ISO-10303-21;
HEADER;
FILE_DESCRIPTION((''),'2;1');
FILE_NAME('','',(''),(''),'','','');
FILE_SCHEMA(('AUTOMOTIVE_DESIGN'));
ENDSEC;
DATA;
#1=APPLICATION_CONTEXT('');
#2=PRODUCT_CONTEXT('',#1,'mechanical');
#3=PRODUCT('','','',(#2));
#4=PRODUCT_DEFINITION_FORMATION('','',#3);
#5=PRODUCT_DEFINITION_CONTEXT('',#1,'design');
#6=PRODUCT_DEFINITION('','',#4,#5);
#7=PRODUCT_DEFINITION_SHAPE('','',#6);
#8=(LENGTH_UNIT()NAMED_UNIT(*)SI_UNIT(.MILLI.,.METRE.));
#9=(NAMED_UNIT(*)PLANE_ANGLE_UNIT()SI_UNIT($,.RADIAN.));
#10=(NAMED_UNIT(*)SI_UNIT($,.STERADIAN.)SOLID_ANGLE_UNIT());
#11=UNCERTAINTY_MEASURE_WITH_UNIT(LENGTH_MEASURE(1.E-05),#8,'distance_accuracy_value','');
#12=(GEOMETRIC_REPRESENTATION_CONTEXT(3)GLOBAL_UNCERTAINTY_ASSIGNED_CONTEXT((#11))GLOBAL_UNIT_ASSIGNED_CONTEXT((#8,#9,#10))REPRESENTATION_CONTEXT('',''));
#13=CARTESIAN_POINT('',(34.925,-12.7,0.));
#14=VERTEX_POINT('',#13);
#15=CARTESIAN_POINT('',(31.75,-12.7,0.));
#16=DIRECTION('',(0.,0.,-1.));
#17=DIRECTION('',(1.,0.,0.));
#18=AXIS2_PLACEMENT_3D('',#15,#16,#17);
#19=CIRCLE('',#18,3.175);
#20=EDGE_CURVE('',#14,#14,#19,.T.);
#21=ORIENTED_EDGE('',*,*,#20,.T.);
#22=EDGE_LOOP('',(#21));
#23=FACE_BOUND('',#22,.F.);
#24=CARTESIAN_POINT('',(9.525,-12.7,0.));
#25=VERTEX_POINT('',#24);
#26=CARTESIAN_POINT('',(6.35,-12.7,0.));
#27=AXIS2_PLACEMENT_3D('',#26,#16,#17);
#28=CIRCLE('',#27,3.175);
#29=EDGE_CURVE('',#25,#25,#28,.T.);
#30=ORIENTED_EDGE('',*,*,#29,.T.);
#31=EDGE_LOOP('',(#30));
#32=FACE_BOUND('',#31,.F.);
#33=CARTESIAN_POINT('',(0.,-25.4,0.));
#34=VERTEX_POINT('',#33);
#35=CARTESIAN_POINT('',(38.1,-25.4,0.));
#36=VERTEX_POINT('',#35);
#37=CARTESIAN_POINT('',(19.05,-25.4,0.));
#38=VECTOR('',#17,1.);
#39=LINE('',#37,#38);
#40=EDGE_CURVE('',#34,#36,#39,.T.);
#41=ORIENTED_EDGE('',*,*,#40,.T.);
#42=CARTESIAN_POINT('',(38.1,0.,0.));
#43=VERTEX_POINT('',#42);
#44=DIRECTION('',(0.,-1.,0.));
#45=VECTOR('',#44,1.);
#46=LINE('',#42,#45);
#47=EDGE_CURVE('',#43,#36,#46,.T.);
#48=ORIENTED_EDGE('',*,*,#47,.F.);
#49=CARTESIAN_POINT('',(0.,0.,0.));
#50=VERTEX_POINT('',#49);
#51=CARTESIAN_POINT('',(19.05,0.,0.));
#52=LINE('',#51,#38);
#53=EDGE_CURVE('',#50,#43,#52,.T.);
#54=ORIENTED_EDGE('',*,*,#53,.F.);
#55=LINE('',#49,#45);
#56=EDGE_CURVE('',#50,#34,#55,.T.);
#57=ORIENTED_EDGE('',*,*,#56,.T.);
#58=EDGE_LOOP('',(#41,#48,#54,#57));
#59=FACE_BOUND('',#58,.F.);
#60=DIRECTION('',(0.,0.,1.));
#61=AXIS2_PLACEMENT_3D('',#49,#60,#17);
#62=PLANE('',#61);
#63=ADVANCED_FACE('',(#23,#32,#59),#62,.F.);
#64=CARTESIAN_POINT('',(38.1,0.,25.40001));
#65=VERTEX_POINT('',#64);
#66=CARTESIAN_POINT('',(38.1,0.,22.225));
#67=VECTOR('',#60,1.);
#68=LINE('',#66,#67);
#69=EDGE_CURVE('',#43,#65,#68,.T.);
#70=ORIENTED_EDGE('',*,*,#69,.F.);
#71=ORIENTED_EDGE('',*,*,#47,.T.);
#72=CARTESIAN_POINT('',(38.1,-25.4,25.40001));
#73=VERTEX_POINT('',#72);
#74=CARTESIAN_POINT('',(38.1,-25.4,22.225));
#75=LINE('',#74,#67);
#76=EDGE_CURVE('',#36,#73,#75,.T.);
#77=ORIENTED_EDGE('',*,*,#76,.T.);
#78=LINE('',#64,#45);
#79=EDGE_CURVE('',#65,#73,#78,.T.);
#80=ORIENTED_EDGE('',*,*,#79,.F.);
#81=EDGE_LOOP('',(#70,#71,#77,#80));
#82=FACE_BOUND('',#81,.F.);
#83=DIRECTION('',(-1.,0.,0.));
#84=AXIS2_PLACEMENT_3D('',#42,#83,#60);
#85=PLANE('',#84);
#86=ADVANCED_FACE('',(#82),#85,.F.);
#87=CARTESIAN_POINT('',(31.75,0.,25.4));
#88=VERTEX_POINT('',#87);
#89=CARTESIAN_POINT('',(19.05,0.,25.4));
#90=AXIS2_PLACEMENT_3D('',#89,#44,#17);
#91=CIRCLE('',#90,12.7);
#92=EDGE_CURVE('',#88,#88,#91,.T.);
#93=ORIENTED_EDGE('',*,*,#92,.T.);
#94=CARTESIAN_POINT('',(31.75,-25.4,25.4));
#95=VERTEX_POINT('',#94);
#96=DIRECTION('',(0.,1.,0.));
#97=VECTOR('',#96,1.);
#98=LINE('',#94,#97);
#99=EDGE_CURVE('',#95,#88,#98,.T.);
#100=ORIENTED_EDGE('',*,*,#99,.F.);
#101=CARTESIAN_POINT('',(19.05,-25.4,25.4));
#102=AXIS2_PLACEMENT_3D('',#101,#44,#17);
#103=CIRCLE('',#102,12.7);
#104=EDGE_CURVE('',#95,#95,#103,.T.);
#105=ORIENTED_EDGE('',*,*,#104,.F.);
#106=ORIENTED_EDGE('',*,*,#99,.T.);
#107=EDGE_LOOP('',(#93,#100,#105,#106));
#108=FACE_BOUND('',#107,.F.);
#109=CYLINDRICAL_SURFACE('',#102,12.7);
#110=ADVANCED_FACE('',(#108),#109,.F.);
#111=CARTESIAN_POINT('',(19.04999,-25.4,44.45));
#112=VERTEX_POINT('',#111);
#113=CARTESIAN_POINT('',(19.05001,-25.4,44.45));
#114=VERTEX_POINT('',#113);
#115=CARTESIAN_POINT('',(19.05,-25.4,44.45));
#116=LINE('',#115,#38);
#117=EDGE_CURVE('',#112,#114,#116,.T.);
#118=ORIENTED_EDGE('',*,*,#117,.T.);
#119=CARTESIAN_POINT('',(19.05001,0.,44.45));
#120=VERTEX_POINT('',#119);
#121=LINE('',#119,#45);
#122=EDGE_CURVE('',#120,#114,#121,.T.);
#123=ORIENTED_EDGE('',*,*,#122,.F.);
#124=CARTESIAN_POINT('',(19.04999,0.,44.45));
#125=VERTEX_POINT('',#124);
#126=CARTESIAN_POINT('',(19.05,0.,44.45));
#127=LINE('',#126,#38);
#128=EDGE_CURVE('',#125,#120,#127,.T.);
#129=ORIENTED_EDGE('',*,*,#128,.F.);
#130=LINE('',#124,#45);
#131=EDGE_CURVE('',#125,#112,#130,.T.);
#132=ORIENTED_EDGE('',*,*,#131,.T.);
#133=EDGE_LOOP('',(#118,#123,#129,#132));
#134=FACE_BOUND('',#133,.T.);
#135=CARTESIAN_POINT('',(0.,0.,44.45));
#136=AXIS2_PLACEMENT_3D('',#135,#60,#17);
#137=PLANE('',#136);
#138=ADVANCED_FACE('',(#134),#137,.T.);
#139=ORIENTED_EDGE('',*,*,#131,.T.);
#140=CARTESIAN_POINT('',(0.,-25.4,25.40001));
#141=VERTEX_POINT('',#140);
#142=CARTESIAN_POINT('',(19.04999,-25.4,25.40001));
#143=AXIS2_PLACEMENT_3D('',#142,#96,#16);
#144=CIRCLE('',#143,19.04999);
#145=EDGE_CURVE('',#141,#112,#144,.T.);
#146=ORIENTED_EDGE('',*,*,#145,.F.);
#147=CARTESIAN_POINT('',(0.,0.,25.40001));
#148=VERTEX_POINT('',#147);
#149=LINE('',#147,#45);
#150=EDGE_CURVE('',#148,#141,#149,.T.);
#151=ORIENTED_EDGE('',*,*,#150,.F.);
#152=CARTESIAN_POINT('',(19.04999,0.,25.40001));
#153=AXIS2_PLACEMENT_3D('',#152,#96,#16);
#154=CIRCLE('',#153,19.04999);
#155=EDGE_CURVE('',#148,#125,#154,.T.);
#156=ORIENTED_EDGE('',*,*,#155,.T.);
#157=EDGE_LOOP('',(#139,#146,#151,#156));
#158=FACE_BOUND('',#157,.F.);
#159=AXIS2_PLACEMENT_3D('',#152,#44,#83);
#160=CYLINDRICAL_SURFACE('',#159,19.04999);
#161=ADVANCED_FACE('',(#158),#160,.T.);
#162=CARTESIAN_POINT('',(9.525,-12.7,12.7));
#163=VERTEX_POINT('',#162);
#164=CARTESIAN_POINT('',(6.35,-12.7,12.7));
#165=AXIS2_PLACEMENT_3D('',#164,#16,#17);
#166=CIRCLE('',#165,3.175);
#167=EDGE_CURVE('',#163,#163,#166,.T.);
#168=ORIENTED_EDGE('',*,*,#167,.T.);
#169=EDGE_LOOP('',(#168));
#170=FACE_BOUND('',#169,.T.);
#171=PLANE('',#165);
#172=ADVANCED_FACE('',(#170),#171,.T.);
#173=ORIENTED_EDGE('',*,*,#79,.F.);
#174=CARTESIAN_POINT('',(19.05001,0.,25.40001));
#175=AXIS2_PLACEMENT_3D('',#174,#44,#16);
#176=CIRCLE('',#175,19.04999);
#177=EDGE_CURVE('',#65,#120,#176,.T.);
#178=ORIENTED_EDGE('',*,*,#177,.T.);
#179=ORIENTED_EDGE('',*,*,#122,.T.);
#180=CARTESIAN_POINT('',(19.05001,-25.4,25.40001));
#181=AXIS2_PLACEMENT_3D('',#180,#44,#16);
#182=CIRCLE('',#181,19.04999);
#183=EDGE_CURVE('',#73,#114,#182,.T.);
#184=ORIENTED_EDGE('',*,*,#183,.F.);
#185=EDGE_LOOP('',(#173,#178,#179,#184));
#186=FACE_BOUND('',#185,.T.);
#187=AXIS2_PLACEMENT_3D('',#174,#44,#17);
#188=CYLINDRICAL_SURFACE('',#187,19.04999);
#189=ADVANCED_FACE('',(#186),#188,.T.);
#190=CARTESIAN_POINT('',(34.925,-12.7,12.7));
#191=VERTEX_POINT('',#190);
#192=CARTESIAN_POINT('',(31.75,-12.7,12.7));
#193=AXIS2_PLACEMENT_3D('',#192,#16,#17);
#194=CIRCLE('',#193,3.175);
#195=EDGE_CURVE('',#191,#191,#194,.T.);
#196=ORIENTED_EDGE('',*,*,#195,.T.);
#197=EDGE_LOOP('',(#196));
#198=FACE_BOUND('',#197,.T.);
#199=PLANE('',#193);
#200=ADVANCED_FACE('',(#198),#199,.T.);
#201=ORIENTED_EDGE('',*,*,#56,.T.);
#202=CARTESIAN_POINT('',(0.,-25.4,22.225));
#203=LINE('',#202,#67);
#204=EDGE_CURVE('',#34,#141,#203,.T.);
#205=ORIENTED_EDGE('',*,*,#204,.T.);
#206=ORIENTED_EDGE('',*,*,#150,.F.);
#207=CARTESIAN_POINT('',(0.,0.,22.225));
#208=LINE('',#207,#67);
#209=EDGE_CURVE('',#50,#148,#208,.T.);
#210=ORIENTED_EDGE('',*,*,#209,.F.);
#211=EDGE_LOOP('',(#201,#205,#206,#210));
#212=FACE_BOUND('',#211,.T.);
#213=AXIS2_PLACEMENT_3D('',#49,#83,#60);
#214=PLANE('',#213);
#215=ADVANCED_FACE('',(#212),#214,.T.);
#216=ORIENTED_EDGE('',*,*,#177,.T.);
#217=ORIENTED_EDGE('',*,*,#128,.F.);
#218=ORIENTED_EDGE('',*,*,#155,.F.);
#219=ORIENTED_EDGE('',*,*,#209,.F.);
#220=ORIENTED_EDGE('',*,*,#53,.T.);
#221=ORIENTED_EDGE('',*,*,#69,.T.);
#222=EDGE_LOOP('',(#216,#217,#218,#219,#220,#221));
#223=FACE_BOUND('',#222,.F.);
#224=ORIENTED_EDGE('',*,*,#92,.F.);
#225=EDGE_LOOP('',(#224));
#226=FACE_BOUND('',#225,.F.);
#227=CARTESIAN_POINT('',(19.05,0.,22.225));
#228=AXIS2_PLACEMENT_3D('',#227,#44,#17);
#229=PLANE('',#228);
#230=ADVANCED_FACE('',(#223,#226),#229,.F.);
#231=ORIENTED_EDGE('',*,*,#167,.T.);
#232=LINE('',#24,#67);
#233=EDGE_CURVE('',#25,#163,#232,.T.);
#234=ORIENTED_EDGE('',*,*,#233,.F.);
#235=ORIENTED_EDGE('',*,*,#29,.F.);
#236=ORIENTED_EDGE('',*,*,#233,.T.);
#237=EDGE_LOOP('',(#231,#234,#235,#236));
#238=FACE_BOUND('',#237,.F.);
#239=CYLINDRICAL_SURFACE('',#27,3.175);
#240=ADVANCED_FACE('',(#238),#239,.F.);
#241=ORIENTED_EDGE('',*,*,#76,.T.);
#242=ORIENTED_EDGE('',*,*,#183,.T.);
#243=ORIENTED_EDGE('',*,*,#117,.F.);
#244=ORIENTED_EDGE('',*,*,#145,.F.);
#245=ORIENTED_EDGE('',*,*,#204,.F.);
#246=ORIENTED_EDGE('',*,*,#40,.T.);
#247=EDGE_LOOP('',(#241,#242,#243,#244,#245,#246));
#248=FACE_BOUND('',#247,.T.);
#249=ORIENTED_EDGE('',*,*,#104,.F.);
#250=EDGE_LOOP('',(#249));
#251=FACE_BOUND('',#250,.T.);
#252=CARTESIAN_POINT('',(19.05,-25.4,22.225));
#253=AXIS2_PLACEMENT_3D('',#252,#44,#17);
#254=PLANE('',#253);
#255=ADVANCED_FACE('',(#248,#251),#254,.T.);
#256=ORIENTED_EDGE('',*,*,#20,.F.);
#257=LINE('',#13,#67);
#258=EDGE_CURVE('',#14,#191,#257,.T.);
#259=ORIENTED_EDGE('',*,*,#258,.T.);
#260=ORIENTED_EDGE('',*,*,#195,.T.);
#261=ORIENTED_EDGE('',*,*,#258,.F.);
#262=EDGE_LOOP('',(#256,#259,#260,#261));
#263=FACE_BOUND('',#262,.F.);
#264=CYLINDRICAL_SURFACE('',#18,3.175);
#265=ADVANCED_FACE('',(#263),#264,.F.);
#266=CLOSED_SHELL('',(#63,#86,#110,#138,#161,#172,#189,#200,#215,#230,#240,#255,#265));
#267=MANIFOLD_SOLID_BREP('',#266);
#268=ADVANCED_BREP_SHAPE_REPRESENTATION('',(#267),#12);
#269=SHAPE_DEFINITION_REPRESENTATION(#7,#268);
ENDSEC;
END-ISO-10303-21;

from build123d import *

# Parameters (mm, degrees)
F0_W     = 38.1
F0_H     = 44.45
F1_DEPTH = 25.4
F2_R     = 19.04999
F3_R     = 12.7
F4_DEPTH = 25.401
F5_R     = 3.175
F6_DEPTH = 12.7


# Not quite as in the source:
# - a fillet or chamfer is up to 0.001 mm smaller than in the source, because OpenCascade refuses the exact size


with BuildPart() as f1:
    # F0 (on Front) → F1 (new body)
    with BuildSketch(Plane.XZ):
        with Locations((19.05, 22.225)):
            Rectangle(F0_W, F0_H)
    extrude(amount=F1_DEPTH)

    # F2 (radius 19.05 in the source; OpenCascade refuses exactly that, so slightly less here)
    f2_edges = [f1.edges().sort_by_distance(p)[0] for p in [
        (0, -12.7, 44.45),
        (38.1, -12.7, 44.45),
    ]]
    fillet(f2_edges, radius=F2_R)

    # F3 (on face) → F4 (cut, through all)
    with BuildSketch(Plane.XZ.offset(25.4)):
        with Locations((19.05, 25.4)):
            Circle(F3_R)
    extrude(amount=-F4_DEPTH, mode=Mode.SUBTRACT)

    # F5 (on face) → F6 (cut)
    with BuildSketch(Plane(origin=(0, 0, 0), x_dir=(1, 0, 0), z_dir=(0, 0, -1))):
        with Locations((6.35, 12.7)):
            Circle(F5_R)
        with Locations((31.75, 12.7)):
            Circle(F5_R)
    extrude(amount=-F6_DEPTH, mode=Mode.SUBTRACT)


solid = f1.part
